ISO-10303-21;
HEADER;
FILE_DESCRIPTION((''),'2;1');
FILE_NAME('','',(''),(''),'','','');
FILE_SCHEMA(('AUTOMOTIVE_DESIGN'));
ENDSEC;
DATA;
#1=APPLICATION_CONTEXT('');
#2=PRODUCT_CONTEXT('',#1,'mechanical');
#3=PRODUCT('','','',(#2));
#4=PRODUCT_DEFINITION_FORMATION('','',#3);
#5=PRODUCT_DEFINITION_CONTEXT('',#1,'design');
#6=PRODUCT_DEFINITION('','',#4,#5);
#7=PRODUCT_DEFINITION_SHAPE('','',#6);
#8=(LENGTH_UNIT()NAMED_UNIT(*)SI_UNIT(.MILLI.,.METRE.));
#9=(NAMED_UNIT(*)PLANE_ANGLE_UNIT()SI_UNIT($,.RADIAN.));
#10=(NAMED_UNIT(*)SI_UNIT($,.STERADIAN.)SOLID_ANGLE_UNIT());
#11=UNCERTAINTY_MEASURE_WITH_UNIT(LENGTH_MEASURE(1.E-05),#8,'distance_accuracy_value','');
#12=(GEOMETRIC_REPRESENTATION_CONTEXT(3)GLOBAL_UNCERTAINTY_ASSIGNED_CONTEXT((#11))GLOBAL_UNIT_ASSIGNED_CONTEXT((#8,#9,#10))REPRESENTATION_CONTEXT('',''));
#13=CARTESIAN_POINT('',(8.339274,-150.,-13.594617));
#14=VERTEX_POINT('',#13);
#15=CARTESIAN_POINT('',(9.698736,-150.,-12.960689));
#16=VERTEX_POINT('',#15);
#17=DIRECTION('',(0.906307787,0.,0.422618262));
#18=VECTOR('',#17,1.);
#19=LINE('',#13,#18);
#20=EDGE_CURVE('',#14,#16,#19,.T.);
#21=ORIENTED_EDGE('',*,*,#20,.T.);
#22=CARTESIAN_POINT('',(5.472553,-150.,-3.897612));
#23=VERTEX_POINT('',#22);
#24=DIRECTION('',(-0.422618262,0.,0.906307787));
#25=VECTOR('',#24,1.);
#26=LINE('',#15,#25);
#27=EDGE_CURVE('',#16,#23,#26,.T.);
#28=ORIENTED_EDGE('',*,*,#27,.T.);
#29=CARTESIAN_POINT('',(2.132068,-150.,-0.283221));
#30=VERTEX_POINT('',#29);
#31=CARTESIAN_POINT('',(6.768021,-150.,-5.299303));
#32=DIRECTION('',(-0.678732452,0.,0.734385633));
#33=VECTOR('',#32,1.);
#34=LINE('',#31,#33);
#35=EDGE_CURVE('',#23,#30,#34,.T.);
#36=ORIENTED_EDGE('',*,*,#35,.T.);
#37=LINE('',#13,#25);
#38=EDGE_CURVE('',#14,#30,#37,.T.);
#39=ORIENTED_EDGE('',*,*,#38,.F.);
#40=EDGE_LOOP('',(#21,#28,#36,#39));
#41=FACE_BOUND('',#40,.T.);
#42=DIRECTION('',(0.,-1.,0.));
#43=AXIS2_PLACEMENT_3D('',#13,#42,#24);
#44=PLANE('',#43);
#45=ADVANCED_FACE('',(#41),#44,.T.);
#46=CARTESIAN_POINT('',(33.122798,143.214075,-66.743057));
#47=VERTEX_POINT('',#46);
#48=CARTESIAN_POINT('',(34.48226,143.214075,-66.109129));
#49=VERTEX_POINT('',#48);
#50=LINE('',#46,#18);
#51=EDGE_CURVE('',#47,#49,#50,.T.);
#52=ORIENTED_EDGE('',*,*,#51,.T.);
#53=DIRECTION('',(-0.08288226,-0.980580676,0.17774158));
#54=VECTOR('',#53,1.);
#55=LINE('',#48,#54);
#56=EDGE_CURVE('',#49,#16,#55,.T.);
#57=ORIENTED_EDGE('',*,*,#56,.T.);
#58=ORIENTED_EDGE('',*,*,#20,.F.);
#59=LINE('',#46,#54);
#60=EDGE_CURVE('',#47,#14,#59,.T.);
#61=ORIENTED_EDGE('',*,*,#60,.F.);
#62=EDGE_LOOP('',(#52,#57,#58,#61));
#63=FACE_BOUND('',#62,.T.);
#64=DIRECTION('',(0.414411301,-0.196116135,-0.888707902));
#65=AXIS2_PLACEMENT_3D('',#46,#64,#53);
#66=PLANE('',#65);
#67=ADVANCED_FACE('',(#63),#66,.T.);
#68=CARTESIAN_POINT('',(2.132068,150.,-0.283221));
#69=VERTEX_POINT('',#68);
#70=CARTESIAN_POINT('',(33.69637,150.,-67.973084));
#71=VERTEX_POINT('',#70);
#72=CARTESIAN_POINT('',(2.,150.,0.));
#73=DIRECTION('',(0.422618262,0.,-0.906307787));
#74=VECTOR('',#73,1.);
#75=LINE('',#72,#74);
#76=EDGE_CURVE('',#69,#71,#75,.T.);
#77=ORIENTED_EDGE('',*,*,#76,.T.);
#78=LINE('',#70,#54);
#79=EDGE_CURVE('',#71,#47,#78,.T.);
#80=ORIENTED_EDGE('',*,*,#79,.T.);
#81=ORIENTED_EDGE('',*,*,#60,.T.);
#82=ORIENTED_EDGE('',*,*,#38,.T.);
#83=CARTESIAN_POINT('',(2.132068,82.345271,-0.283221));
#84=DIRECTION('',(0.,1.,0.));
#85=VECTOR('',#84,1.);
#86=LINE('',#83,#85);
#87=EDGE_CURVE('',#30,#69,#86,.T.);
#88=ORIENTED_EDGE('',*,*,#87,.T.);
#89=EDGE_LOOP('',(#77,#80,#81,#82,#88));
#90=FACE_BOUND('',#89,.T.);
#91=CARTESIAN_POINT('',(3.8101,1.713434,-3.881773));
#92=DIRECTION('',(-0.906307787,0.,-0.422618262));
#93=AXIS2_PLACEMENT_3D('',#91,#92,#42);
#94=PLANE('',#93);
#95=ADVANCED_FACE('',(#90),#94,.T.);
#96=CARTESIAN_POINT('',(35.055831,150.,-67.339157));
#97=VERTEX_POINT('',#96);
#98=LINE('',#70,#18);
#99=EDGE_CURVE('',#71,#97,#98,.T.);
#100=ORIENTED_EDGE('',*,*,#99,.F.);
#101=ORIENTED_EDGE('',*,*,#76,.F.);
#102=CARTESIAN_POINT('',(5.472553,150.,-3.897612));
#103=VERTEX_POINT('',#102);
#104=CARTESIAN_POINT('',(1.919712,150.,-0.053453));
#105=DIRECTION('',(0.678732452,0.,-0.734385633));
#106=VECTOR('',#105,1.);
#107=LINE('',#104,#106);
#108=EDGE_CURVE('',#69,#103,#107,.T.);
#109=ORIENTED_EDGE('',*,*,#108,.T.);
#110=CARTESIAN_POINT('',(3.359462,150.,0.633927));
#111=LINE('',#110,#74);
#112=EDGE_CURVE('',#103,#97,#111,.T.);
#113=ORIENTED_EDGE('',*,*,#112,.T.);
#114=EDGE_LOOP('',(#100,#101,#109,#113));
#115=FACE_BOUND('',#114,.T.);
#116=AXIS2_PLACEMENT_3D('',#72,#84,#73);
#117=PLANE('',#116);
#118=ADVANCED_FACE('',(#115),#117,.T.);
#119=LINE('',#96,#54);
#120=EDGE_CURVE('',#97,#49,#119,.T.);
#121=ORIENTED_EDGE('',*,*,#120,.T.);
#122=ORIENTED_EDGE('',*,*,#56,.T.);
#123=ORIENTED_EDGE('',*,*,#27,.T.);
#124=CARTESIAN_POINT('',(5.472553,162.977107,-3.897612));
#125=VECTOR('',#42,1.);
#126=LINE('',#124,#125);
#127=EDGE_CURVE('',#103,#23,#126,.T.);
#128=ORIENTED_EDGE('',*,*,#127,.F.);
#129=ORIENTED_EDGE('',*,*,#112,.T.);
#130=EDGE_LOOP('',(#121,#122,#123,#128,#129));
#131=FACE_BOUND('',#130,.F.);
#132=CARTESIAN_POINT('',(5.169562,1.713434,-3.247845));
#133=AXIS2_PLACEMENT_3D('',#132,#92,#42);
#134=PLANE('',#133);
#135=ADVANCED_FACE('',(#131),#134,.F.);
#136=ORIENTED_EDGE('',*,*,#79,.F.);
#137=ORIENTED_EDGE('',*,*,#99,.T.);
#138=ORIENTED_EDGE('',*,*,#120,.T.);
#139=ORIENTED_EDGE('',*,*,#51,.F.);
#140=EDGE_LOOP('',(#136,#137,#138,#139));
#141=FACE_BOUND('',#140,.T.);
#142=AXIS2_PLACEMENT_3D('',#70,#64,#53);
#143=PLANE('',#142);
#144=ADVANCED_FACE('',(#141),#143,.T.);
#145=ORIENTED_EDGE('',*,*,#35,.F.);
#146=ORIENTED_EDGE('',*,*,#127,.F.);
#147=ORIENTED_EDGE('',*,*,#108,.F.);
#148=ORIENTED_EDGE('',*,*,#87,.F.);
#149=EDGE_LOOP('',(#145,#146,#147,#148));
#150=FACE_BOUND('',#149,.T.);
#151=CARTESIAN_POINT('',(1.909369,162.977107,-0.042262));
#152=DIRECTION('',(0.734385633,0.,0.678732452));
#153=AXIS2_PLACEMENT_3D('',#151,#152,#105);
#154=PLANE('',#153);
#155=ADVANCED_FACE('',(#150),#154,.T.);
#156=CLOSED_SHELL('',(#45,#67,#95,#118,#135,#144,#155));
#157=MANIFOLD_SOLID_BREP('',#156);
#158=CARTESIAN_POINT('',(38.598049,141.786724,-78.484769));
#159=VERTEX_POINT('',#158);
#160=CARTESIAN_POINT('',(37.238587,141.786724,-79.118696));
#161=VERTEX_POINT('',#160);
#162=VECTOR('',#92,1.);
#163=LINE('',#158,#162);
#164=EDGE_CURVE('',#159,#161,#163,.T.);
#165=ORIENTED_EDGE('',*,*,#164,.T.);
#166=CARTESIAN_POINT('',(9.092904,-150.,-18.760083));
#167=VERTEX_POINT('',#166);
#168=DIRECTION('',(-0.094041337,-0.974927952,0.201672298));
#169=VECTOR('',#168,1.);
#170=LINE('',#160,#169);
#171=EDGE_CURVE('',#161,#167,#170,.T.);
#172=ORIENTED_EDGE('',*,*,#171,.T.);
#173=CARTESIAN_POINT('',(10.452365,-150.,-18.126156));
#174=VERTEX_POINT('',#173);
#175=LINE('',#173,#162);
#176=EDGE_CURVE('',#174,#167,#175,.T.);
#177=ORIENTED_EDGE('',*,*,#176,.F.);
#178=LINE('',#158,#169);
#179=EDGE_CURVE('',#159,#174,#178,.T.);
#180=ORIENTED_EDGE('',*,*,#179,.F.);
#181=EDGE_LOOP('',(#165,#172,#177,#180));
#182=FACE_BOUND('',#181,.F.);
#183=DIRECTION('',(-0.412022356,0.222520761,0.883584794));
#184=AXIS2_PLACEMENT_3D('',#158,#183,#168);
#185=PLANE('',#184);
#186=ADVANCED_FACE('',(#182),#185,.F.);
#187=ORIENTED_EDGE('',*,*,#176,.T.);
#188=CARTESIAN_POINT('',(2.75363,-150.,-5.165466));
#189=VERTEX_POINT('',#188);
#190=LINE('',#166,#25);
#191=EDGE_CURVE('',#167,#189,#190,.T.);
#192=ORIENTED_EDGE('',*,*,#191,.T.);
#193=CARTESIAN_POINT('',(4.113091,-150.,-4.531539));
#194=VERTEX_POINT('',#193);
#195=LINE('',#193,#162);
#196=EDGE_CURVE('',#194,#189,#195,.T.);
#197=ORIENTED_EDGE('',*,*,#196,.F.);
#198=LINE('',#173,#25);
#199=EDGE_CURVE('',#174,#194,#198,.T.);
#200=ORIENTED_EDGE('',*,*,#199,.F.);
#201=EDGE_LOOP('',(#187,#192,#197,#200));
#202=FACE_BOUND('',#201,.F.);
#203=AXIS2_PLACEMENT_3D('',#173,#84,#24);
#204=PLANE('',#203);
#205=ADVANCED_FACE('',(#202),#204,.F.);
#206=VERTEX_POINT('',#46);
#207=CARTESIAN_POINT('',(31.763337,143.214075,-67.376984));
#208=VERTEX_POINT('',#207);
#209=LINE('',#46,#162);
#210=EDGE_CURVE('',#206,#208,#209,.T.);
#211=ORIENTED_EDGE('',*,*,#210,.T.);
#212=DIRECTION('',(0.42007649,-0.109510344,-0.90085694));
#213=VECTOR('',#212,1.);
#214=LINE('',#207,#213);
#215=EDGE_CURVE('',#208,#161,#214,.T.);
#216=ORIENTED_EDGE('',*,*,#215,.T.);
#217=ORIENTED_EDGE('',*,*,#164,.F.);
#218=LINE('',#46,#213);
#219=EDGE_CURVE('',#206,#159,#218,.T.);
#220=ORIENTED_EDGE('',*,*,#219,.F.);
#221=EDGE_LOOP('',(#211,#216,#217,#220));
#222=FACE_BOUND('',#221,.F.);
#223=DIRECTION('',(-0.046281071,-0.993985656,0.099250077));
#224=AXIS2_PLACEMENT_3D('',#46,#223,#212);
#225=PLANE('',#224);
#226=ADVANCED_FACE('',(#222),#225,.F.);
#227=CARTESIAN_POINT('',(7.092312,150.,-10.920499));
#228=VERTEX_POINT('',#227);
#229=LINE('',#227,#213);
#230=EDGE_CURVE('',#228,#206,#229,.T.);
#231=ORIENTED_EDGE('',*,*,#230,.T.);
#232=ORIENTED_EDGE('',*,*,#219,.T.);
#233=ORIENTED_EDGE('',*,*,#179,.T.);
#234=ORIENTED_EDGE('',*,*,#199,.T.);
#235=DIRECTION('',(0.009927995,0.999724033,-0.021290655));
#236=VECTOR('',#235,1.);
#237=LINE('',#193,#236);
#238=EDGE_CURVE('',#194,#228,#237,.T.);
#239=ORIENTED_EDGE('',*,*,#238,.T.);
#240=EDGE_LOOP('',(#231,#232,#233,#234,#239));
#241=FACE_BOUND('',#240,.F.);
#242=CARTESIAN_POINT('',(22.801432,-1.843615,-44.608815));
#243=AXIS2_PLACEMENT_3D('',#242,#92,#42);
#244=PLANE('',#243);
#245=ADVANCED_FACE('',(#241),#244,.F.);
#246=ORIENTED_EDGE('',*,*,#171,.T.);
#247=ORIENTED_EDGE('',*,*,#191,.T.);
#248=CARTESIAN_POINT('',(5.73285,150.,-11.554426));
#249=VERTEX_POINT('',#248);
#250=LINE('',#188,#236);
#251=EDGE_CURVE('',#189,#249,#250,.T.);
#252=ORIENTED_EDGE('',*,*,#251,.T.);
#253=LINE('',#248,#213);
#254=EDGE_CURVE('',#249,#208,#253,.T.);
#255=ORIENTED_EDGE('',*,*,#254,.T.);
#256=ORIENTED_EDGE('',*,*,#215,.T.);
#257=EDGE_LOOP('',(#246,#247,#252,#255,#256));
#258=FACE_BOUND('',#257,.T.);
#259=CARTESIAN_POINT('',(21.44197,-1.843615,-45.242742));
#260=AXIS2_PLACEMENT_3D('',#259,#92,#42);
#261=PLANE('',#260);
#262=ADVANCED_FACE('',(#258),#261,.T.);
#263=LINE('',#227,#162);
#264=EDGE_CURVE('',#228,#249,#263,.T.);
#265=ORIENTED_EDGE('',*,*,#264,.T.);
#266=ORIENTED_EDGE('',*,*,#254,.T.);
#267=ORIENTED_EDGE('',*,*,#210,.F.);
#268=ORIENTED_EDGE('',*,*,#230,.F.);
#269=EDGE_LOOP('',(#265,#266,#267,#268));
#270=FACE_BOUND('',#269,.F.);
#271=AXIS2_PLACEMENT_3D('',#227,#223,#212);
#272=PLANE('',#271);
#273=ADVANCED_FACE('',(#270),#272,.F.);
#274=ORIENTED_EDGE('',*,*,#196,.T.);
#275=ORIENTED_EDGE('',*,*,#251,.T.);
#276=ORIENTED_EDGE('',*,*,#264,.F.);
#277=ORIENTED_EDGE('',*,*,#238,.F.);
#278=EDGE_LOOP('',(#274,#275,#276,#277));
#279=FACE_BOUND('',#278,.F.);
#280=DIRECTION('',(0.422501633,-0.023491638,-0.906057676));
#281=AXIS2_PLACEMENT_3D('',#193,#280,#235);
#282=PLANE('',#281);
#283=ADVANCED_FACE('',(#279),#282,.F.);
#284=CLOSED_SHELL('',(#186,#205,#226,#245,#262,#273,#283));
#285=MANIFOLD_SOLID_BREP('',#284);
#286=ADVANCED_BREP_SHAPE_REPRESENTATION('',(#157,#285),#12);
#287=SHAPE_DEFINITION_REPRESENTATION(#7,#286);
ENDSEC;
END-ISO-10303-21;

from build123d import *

# Parameters (mm, degrees)
F3_DEPTH    = 1.5
F4_DEPTH    = 1.5
F5_T1_DEPTH = 325.9542136725


# Not quite as in the source:
# - a fillet or chamfer that OpenCascade refuses, or shapes differently, is made with other operations: its cross-section is extruded or revolved along the edge and cut away or added


with BuildPart() as f3:
    # F2 (on line) → F3 (new body)
    with BuildSketch(Plane(origin=(1.6427876097, 0, 0.7660444431), x_dir=(0, -1, 0), z_dir=(-0.906307787, 0, -0.4226182617))):
        Polygon((150, -5.8452365235), (150, -0.8452365235), (-150, -0.8452365235), (-150, -12.8946734447), align=None)
        Polygon((-143.2140751153, -74.4880515465), (-150, -12.8946734447), (-150, -75.8452365235), align=None)
        Polygon((150, -15.8452365235), (150, -5.8452365235), (-150, -12.8946734447), (-143.2140751153, -74.4880515465), align=None)
    extrude(amount=-F3_DEPTH)

    # F5: chamfer of 1.6 x 5 on 1 edges, made by hand

    # F5_s2 → F5_t1 (cut)
    with BuildSketch(Plane.XZ.offset(-162.9771068363)):
        Polygon((1.9093692213, -0.0422618262), (5.4725529893, -3.8976115426), (3.3594616806, 0.6339273926), align=None)
    extrude(amount=F5_T1_DEPTH, mode=Mode.SUBTRACT)


with BuildPart() as f4:
    # F2 (on line) → F4 (new body)
    with BuildSketch(Plane(origin=(1.6427876097, 0, 0.7660444431), x_dir=(0, -1, 0), z_dir=(-0.906307787, 0, -0.4226182617))):
        Polygon((150, -20.8452365235), (150, -15.8452365235), (-143.2140751153, -74.4880515465), (-141.7867242303, -87.4435976565), align=None)
        Polygon((150, -15.8452365235), (150, -5.8452365235), (-150, -12.8946734447), (-143.2140751153, -74.4880515465), align=None)
    extrude(amount=F4_DEPTH)


solid = Compound([f3.part, f4.part])
